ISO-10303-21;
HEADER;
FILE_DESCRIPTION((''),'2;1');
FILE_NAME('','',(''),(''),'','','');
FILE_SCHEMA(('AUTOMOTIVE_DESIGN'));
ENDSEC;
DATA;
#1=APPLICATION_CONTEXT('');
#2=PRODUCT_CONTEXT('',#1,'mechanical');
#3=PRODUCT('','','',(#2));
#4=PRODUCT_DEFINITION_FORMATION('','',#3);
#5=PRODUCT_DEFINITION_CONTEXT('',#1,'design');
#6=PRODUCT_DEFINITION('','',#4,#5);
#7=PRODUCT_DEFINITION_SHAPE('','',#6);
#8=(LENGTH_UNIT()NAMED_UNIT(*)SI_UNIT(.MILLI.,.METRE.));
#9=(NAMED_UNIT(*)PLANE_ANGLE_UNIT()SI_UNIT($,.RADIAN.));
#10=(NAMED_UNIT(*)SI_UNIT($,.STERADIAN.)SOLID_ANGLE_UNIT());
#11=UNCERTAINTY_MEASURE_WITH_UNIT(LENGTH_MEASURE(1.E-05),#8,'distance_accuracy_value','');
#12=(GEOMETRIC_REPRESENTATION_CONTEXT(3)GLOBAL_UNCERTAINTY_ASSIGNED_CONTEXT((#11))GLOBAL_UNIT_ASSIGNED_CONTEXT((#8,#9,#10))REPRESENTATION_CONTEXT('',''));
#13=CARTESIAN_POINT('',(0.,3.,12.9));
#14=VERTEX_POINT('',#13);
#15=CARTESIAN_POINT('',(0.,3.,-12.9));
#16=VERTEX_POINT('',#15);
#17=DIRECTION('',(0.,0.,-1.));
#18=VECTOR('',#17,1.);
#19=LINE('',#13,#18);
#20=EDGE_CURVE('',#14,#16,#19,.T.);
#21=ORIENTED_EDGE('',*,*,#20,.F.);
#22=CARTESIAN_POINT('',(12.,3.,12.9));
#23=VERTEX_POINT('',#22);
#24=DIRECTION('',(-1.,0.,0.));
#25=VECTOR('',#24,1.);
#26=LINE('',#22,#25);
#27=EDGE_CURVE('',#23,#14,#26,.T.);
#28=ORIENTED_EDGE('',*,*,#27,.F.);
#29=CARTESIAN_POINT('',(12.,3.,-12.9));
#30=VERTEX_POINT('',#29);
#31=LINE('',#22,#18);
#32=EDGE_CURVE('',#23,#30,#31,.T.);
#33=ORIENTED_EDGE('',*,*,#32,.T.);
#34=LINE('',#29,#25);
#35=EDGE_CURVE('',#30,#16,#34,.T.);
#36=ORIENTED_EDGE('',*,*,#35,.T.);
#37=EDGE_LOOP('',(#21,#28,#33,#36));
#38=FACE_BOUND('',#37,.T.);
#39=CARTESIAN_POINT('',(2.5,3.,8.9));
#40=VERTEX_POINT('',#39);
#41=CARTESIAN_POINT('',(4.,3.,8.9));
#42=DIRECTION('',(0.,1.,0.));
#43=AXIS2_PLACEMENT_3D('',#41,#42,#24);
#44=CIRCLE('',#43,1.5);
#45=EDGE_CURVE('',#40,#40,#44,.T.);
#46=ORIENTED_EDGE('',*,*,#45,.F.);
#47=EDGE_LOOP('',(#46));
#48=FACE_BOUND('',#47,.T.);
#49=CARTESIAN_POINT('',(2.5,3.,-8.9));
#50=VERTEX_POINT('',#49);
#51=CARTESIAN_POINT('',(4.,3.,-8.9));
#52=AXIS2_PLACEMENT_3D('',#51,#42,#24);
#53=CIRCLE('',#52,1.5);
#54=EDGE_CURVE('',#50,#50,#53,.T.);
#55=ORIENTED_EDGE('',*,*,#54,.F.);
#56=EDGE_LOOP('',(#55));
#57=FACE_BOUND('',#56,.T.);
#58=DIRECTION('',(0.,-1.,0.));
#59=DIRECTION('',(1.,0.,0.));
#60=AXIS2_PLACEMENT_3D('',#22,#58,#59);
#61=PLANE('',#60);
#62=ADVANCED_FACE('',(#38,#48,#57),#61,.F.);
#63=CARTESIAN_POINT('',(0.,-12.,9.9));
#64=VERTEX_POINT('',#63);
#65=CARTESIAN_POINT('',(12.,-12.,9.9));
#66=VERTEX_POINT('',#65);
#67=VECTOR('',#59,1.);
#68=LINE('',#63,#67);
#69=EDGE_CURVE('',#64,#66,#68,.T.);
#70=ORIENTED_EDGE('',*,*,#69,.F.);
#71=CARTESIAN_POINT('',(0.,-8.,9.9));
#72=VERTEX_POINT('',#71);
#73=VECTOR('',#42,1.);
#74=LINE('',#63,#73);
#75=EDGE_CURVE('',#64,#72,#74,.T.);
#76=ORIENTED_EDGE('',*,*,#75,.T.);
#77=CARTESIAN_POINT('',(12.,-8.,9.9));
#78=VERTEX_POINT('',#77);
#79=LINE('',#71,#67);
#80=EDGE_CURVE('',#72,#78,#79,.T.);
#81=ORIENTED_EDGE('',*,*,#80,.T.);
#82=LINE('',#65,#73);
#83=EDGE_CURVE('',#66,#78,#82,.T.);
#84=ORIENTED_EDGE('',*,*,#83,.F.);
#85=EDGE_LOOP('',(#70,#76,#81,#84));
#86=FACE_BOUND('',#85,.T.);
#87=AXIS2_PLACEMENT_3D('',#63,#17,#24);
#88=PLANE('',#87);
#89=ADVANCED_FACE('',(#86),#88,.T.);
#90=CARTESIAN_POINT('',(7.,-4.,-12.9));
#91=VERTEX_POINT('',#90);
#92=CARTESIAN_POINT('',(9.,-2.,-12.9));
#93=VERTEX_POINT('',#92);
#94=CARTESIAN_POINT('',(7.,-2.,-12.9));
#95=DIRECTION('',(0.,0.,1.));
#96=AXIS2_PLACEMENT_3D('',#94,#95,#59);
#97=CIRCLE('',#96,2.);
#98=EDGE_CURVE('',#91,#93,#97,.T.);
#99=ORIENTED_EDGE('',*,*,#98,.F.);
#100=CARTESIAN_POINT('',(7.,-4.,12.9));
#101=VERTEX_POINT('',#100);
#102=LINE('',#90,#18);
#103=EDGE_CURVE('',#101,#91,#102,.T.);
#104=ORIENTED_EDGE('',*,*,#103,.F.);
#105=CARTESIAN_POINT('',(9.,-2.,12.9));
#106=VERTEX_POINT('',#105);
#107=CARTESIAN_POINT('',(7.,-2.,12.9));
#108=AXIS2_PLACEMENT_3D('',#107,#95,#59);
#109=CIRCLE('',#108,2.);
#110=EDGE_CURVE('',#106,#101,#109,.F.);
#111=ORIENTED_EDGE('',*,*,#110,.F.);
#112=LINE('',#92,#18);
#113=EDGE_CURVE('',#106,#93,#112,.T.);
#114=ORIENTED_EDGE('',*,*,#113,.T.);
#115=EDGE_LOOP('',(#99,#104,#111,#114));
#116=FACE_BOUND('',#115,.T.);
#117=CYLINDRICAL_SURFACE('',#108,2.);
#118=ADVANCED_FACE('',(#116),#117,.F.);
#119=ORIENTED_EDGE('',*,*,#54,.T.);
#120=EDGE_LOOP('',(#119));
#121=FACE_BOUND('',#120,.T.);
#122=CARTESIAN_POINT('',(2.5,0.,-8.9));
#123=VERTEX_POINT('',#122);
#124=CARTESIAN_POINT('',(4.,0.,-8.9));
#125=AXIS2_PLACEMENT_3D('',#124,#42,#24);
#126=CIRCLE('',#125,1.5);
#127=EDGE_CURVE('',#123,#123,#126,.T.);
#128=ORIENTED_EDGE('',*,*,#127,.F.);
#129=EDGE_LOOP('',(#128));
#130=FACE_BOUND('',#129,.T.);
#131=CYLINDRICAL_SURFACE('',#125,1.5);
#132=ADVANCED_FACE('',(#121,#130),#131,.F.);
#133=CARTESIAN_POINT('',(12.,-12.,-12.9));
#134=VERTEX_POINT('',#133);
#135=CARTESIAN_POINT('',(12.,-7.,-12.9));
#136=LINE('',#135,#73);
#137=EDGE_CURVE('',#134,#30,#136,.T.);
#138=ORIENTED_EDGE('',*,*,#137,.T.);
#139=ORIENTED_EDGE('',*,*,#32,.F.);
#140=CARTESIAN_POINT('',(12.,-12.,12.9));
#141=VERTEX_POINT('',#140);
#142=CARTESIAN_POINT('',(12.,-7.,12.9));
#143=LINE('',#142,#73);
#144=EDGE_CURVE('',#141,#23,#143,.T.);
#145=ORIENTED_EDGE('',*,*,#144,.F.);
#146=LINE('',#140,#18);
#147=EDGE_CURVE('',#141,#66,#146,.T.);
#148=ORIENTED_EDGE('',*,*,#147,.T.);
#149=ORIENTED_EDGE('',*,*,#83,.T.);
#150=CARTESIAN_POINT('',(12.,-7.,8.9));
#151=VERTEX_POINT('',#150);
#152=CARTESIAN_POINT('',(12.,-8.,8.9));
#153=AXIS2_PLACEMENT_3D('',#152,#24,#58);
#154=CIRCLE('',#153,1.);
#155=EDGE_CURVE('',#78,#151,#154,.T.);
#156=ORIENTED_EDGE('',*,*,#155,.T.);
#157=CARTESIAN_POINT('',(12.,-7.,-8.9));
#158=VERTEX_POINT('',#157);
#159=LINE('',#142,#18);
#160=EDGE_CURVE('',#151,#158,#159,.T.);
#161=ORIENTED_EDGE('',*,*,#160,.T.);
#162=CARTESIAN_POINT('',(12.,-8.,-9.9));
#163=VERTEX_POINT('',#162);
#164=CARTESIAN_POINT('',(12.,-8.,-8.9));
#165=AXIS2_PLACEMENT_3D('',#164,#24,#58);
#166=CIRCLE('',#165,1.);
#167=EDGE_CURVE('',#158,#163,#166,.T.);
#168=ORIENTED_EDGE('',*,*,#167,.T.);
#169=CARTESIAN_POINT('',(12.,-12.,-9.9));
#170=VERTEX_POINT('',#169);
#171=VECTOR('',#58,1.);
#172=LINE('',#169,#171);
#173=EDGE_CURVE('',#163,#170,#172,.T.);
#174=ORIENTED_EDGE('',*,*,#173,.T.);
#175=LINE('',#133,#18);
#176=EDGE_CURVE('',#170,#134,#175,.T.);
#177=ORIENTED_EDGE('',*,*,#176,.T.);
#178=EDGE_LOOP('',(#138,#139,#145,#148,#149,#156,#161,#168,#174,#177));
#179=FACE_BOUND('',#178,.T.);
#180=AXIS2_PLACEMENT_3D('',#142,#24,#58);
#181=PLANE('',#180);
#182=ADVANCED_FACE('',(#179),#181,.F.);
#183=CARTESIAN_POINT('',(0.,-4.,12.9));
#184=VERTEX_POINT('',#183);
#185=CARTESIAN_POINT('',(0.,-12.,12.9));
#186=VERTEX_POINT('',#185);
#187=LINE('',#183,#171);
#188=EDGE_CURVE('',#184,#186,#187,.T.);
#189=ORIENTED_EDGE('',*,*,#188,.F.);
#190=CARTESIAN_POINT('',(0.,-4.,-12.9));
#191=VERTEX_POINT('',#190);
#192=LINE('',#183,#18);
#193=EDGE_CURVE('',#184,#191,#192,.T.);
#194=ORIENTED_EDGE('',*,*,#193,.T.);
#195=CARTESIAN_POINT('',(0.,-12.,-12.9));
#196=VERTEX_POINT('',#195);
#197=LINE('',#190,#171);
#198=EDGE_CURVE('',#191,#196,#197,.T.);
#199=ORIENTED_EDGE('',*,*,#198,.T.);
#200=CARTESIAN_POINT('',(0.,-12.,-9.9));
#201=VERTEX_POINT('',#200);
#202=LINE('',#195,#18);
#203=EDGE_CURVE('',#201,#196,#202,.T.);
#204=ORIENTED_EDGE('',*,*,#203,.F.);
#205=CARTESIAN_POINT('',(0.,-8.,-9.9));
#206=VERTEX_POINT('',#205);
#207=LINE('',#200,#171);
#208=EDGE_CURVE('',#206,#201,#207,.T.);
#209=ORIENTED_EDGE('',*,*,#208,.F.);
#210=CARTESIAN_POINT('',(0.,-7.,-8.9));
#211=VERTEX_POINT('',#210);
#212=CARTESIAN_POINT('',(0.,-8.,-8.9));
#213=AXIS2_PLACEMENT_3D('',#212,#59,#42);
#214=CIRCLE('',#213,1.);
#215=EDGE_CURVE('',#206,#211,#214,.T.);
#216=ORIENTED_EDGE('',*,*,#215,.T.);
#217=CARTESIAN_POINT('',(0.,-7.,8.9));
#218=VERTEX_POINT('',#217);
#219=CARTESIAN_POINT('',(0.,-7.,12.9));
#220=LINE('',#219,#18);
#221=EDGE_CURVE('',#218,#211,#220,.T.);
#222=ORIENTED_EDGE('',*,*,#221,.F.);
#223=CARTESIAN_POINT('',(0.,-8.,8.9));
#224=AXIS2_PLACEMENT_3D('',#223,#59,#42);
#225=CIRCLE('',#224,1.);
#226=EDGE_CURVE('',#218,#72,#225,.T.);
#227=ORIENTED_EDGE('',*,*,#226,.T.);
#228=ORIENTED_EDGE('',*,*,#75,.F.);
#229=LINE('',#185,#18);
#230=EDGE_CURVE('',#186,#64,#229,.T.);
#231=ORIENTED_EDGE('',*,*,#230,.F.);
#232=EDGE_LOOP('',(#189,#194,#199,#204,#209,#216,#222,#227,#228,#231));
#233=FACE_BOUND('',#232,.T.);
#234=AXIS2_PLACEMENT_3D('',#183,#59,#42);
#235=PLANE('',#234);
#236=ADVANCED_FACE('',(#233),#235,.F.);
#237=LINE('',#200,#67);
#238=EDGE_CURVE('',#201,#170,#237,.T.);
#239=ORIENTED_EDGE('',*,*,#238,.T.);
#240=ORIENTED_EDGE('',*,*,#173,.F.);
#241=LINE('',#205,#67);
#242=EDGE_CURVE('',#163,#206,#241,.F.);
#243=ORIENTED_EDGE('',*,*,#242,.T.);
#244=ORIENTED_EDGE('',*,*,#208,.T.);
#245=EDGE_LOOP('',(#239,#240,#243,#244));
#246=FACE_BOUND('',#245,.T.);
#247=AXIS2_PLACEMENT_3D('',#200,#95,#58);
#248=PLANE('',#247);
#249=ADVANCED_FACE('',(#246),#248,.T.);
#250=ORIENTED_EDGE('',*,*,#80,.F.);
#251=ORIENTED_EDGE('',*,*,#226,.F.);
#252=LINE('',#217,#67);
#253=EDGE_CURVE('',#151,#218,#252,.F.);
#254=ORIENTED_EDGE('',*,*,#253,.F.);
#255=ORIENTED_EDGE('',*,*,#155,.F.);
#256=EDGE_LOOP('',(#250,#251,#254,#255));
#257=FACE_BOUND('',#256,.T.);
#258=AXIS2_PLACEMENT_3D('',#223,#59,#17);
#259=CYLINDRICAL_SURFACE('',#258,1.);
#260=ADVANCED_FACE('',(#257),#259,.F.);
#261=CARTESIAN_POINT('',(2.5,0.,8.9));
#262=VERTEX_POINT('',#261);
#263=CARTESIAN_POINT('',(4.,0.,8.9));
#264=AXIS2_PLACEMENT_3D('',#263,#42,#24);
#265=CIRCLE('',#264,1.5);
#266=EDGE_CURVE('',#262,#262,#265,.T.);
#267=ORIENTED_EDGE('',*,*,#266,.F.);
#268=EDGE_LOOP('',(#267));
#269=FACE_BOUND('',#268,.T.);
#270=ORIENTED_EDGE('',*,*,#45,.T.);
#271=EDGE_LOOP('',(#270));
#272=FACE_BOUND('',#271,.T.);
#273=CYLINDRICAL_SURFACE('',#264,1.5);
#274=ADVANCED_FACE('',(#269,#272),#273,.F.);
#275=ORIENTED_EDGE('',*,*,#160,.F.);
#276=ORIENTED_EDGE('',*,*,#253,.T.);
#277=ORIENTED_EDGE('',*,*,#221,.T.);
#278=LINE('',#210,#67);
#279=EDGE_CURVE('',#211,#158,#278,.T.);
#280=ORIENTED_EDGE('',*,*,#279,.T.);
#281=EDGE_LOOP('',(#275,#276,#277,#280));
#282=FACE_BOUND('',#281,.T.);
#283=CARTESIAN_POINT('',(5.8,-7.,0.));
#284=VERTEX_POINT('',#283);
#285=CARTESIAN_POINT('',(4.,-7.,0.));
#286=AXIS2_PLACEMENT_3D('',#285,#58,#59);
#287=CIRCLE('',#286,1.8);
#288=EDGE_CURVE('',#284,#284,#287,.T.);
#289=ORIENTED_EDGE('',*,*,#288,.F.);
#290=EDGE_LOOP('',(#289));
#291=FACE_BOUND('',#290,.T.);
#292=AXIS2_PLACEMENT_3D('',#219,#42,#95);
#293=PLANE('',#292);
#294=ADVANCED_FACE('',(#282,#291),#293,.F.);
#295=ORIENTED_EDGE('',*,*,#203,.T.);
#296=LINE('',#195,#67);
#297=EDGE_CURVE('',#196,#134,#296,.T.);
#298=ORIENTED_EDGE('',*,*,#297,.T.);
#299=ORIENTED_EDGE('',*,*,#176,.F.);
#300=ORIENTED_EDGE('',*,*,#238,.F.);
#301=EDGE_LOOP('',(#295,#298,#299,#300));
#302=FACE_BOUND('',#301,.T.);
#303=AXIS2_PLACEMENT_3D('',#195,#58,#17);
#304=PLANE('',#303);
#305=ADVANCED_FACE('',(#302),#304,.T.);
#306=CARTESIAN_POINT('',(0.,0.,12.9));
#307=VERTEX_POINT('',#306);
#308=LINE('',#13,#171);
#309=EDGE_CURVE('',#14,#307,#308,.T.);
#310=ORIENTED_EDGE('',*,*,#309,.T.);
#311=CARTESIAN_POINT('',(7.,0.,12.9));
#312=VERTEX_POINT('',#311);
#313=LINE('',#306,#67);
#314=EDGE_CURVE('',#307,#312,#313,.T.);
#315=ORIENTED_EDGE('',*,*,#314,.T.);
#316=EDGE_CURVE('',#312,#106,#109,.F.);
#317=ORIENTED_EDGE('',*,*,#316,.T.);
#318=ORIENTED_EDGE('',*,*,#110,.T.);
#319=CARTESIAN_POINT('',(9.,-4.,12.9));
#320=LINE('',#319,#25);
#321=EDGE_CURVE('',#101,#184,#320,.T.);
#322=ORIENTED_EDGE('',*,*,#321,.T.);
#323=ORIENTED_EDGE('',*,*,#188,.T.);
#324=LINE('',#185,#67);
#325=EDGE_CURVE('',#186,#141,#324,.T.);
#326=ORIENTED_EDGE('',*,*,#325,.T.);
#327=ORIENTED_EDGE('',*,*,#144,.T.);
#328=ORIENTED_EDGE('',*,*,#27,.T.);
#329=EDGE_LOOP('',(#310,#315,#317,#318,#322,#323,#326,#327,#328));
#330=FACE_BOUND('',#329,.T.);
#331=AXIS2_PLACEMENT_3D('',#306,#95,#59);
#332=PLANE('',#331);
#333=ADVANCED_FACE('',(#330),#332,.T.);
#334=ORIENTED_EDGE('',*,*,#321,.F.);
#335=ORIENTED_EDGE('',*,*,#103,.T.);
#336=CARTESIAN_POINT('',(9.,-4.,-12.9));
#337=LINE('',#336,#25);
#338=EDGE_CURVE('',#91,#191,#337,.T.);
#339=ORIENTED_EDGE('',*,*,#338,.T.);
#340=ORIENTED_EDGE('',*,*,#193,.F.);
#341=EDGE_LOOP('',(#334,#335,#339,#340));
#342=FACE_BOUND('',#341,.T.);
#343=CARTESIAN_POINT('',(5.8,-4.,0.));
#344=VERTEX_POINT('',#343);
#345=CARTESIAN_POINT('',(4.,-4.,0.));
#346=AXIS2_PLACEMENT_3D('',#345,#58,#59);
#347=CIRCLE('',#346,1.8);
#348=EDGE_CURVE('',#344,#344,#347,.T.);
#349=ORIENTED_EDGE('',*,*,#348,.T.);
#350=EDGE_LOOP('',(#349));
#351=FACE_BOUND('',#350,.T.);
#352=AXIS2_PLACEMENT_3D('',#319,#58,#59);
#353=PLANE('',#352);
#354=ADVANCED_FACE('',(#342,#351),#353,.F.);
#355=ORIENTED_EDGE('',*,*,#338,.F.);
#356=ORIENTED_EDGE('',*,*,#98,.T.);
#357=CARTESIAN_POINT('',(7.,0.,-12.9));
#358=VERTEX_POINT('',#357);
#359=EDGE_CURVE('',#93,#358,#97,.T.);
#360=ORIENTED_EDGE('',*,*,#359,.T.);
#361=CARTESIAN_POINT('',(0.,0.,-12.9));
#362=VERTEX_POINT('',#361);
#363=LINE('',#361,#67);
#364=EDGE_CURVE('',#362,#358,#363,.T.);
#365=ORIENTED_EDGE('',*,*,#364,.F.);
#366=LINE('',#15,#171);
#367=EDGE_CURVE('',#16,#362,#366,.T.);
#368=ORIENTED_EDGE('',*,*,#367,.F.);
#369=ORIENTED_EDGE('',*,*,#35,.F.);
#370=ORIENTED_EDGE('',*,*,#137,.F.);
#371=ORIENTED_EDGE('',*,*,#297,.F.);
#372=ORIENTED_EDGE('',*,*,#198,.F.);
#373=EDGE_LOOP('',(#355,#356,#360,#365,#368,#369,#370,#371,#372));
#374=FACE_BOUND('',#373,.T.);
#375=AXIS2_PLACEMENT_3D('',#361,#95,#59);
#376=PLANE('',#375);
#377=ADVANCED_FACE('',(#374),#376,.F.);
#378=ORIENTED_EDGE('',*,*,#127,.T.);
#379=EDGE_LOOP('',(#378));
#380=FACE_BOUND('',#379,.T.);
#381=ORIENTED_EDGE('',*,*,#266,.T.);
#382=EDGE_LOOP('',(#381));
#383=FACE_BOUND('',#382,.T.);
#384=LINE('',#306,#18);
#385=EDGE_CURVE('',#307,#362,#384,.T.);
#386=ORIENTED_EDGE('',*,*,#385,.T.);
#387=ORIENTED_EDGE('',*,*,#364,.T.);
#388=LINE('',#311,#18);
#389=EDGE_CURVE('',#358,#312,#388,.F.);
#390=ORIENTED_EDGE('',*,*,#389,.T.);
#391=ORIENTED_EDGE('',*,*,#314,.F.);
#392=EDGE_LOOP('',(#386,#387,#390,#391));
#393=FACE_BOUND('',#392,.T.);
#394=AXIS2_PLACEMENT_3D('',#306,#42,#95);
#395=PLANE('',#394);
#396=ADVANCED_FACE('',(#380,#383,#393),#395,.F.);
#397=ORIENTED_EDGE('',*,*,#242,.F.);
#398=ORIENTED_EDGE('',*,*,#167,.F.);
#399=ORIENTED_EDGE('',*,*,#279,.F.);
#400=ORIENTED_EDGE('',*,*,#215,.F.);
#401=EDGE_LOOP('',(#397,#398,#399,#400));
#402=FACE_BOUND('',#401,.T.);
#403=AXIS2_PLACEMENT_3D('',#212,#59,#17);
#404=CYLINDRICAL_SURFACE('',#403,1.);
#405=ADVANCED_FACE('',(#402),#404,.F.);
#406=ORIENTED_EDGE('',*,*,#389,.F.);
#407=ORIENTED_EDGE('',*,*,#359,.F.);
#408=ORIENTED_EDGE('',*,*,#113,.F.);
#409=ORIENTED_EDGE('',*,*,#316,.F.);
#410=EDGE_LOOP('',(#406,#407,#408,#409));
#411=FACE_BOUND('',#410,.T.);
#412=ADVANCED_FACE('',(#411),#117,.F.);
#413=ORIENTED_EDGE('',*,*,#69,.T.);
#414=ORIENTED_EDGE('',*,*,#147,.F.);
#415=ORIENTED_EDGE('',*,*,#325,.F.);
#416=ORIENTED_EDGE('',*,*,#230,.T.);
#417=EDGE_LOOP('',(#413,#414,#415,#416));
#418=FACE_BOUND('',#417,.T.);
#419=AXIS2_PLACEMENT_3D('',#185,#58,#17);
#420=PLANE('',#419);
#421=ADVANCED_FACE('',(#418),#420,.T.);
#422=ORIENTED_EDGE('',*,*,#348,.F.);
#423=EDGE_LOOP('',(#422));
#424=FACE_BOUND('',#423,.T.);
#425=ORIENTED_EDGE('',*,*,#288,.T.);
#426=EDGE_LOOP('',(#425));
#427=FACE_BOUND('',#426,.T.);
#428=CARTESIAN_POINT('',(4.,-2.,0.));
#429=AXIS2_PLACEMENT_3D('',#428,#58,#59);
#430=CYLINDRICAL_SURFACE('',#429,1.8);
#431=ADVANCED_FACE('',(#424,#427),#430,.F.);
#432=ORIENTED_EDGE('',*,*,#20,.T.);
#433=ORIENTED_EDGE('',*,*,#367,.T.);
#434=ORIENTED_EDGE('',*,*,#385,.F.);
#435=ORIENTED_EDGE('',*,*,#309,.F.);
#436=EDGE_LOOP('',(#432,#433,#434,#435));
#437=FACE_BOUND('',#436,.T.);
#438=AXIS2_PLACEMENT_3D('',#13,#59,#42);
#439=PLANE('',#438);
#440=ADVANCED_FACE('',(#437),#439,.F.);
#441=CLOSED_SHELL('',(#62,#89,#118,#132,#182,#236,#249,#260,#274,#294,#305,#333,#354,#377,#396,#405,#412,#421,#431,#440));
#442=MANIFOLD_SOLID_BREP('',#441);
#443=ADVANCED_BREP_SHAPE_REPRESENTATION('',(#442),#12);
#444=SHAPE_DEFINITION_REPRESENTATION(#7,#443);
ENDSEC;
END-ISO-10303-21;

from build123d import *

# Parameters (mm, degrees)
BOSS_EXTRUDE1_DEPTH = 12.9
SKETCH2_W           = 3
SKETCH2_H           = 5
BOSS_EXTRUDE2_DEPTH = 12
SKETCH3_R           = 1.8
CUT_EXTRUDE1_DEPTH  = 5
FILLET1_R           = 2
FILLET2_R           = 1
SKETCH4_R           = 1.5
CUT_EXTRUDE2_DEPTH  = 3


with BuildPart() as part:
    # Sketch1 → Boss-Extrude1 (new, symmetric)
    with BuildSketch(Plane.XY):
        Polygon((0, 0), (9, 0), (9, -4), (0, -4), (0, -7), (12, -7), (12, 3), (0, 3), align=None)
    extrude(amount=BOSS_EXTRUDE1_DEPTH, both=True)

    # Sketch2 → Boss-Extrude2 (add, through all)
    with BuildSketch(Plane(origin=(12, 0, 0), x_dir=(0, 0, -1), z_dir=(1, 0, 0))):
        with Locations((-11.4, -9.5)):
            Rectangle(SKETCH2_W, SKETCH2_H)
        with Locations((11.4, -9.5)):
            Rectangle(SKETCH2_W, SKETCH2_H)
    extrude(amount=-BOSS_EXTRUDE2_DEPTH)

    # Sketch3 → Cut-Extrude1 (cut)
    with BuildSketch(Plane.XZ.offset(7)):
        with Locations((4, 0)):
            Circle(SKETCH3_R)
    extrude(amount=-CUT_EXTRUDE1_DEPTH, mode=Mode.SUBTRACT)

    # Fillet1
    fillet1_edges = [part.edges().sort_by_distance(p)[0] for p in [
        (9, -4, 0),
        (9, 0, 0),
    ]]
    fillet(fillet1_edges, radius=FILLET1_R - 0.0001)  # a hair under: the kernel refuses the full size

    # Fillet2
    fillet2_edges = [part.edges().sort_by_distance(p)[0] for p in [
        (6, -7, 9.9),
        (6, -7, -9.9),
    ]]
    fillet(fillet2_edges, radius=FILLET2_R)

    # Sketch4 → Cut-Extrude2 (cut)
    with BuildSketch(Plane(origin=(0, 3, 0), x_dir=(1, 0, 0), z_dir=(0, 1, 0))):
        with Locations(Location((4, 8.9, 0), (0, 0, 180))):
            Circle(SKETCH4_R)
        with Locations(Location((4, -8.9, 0), (0, 0, 180))):
            Circle(SKETCH4_R)
    extrude(amount=-CUT_EXTRUDE2_DEPTH, mode=Mode.SUBTRACT)


solid = part.part
